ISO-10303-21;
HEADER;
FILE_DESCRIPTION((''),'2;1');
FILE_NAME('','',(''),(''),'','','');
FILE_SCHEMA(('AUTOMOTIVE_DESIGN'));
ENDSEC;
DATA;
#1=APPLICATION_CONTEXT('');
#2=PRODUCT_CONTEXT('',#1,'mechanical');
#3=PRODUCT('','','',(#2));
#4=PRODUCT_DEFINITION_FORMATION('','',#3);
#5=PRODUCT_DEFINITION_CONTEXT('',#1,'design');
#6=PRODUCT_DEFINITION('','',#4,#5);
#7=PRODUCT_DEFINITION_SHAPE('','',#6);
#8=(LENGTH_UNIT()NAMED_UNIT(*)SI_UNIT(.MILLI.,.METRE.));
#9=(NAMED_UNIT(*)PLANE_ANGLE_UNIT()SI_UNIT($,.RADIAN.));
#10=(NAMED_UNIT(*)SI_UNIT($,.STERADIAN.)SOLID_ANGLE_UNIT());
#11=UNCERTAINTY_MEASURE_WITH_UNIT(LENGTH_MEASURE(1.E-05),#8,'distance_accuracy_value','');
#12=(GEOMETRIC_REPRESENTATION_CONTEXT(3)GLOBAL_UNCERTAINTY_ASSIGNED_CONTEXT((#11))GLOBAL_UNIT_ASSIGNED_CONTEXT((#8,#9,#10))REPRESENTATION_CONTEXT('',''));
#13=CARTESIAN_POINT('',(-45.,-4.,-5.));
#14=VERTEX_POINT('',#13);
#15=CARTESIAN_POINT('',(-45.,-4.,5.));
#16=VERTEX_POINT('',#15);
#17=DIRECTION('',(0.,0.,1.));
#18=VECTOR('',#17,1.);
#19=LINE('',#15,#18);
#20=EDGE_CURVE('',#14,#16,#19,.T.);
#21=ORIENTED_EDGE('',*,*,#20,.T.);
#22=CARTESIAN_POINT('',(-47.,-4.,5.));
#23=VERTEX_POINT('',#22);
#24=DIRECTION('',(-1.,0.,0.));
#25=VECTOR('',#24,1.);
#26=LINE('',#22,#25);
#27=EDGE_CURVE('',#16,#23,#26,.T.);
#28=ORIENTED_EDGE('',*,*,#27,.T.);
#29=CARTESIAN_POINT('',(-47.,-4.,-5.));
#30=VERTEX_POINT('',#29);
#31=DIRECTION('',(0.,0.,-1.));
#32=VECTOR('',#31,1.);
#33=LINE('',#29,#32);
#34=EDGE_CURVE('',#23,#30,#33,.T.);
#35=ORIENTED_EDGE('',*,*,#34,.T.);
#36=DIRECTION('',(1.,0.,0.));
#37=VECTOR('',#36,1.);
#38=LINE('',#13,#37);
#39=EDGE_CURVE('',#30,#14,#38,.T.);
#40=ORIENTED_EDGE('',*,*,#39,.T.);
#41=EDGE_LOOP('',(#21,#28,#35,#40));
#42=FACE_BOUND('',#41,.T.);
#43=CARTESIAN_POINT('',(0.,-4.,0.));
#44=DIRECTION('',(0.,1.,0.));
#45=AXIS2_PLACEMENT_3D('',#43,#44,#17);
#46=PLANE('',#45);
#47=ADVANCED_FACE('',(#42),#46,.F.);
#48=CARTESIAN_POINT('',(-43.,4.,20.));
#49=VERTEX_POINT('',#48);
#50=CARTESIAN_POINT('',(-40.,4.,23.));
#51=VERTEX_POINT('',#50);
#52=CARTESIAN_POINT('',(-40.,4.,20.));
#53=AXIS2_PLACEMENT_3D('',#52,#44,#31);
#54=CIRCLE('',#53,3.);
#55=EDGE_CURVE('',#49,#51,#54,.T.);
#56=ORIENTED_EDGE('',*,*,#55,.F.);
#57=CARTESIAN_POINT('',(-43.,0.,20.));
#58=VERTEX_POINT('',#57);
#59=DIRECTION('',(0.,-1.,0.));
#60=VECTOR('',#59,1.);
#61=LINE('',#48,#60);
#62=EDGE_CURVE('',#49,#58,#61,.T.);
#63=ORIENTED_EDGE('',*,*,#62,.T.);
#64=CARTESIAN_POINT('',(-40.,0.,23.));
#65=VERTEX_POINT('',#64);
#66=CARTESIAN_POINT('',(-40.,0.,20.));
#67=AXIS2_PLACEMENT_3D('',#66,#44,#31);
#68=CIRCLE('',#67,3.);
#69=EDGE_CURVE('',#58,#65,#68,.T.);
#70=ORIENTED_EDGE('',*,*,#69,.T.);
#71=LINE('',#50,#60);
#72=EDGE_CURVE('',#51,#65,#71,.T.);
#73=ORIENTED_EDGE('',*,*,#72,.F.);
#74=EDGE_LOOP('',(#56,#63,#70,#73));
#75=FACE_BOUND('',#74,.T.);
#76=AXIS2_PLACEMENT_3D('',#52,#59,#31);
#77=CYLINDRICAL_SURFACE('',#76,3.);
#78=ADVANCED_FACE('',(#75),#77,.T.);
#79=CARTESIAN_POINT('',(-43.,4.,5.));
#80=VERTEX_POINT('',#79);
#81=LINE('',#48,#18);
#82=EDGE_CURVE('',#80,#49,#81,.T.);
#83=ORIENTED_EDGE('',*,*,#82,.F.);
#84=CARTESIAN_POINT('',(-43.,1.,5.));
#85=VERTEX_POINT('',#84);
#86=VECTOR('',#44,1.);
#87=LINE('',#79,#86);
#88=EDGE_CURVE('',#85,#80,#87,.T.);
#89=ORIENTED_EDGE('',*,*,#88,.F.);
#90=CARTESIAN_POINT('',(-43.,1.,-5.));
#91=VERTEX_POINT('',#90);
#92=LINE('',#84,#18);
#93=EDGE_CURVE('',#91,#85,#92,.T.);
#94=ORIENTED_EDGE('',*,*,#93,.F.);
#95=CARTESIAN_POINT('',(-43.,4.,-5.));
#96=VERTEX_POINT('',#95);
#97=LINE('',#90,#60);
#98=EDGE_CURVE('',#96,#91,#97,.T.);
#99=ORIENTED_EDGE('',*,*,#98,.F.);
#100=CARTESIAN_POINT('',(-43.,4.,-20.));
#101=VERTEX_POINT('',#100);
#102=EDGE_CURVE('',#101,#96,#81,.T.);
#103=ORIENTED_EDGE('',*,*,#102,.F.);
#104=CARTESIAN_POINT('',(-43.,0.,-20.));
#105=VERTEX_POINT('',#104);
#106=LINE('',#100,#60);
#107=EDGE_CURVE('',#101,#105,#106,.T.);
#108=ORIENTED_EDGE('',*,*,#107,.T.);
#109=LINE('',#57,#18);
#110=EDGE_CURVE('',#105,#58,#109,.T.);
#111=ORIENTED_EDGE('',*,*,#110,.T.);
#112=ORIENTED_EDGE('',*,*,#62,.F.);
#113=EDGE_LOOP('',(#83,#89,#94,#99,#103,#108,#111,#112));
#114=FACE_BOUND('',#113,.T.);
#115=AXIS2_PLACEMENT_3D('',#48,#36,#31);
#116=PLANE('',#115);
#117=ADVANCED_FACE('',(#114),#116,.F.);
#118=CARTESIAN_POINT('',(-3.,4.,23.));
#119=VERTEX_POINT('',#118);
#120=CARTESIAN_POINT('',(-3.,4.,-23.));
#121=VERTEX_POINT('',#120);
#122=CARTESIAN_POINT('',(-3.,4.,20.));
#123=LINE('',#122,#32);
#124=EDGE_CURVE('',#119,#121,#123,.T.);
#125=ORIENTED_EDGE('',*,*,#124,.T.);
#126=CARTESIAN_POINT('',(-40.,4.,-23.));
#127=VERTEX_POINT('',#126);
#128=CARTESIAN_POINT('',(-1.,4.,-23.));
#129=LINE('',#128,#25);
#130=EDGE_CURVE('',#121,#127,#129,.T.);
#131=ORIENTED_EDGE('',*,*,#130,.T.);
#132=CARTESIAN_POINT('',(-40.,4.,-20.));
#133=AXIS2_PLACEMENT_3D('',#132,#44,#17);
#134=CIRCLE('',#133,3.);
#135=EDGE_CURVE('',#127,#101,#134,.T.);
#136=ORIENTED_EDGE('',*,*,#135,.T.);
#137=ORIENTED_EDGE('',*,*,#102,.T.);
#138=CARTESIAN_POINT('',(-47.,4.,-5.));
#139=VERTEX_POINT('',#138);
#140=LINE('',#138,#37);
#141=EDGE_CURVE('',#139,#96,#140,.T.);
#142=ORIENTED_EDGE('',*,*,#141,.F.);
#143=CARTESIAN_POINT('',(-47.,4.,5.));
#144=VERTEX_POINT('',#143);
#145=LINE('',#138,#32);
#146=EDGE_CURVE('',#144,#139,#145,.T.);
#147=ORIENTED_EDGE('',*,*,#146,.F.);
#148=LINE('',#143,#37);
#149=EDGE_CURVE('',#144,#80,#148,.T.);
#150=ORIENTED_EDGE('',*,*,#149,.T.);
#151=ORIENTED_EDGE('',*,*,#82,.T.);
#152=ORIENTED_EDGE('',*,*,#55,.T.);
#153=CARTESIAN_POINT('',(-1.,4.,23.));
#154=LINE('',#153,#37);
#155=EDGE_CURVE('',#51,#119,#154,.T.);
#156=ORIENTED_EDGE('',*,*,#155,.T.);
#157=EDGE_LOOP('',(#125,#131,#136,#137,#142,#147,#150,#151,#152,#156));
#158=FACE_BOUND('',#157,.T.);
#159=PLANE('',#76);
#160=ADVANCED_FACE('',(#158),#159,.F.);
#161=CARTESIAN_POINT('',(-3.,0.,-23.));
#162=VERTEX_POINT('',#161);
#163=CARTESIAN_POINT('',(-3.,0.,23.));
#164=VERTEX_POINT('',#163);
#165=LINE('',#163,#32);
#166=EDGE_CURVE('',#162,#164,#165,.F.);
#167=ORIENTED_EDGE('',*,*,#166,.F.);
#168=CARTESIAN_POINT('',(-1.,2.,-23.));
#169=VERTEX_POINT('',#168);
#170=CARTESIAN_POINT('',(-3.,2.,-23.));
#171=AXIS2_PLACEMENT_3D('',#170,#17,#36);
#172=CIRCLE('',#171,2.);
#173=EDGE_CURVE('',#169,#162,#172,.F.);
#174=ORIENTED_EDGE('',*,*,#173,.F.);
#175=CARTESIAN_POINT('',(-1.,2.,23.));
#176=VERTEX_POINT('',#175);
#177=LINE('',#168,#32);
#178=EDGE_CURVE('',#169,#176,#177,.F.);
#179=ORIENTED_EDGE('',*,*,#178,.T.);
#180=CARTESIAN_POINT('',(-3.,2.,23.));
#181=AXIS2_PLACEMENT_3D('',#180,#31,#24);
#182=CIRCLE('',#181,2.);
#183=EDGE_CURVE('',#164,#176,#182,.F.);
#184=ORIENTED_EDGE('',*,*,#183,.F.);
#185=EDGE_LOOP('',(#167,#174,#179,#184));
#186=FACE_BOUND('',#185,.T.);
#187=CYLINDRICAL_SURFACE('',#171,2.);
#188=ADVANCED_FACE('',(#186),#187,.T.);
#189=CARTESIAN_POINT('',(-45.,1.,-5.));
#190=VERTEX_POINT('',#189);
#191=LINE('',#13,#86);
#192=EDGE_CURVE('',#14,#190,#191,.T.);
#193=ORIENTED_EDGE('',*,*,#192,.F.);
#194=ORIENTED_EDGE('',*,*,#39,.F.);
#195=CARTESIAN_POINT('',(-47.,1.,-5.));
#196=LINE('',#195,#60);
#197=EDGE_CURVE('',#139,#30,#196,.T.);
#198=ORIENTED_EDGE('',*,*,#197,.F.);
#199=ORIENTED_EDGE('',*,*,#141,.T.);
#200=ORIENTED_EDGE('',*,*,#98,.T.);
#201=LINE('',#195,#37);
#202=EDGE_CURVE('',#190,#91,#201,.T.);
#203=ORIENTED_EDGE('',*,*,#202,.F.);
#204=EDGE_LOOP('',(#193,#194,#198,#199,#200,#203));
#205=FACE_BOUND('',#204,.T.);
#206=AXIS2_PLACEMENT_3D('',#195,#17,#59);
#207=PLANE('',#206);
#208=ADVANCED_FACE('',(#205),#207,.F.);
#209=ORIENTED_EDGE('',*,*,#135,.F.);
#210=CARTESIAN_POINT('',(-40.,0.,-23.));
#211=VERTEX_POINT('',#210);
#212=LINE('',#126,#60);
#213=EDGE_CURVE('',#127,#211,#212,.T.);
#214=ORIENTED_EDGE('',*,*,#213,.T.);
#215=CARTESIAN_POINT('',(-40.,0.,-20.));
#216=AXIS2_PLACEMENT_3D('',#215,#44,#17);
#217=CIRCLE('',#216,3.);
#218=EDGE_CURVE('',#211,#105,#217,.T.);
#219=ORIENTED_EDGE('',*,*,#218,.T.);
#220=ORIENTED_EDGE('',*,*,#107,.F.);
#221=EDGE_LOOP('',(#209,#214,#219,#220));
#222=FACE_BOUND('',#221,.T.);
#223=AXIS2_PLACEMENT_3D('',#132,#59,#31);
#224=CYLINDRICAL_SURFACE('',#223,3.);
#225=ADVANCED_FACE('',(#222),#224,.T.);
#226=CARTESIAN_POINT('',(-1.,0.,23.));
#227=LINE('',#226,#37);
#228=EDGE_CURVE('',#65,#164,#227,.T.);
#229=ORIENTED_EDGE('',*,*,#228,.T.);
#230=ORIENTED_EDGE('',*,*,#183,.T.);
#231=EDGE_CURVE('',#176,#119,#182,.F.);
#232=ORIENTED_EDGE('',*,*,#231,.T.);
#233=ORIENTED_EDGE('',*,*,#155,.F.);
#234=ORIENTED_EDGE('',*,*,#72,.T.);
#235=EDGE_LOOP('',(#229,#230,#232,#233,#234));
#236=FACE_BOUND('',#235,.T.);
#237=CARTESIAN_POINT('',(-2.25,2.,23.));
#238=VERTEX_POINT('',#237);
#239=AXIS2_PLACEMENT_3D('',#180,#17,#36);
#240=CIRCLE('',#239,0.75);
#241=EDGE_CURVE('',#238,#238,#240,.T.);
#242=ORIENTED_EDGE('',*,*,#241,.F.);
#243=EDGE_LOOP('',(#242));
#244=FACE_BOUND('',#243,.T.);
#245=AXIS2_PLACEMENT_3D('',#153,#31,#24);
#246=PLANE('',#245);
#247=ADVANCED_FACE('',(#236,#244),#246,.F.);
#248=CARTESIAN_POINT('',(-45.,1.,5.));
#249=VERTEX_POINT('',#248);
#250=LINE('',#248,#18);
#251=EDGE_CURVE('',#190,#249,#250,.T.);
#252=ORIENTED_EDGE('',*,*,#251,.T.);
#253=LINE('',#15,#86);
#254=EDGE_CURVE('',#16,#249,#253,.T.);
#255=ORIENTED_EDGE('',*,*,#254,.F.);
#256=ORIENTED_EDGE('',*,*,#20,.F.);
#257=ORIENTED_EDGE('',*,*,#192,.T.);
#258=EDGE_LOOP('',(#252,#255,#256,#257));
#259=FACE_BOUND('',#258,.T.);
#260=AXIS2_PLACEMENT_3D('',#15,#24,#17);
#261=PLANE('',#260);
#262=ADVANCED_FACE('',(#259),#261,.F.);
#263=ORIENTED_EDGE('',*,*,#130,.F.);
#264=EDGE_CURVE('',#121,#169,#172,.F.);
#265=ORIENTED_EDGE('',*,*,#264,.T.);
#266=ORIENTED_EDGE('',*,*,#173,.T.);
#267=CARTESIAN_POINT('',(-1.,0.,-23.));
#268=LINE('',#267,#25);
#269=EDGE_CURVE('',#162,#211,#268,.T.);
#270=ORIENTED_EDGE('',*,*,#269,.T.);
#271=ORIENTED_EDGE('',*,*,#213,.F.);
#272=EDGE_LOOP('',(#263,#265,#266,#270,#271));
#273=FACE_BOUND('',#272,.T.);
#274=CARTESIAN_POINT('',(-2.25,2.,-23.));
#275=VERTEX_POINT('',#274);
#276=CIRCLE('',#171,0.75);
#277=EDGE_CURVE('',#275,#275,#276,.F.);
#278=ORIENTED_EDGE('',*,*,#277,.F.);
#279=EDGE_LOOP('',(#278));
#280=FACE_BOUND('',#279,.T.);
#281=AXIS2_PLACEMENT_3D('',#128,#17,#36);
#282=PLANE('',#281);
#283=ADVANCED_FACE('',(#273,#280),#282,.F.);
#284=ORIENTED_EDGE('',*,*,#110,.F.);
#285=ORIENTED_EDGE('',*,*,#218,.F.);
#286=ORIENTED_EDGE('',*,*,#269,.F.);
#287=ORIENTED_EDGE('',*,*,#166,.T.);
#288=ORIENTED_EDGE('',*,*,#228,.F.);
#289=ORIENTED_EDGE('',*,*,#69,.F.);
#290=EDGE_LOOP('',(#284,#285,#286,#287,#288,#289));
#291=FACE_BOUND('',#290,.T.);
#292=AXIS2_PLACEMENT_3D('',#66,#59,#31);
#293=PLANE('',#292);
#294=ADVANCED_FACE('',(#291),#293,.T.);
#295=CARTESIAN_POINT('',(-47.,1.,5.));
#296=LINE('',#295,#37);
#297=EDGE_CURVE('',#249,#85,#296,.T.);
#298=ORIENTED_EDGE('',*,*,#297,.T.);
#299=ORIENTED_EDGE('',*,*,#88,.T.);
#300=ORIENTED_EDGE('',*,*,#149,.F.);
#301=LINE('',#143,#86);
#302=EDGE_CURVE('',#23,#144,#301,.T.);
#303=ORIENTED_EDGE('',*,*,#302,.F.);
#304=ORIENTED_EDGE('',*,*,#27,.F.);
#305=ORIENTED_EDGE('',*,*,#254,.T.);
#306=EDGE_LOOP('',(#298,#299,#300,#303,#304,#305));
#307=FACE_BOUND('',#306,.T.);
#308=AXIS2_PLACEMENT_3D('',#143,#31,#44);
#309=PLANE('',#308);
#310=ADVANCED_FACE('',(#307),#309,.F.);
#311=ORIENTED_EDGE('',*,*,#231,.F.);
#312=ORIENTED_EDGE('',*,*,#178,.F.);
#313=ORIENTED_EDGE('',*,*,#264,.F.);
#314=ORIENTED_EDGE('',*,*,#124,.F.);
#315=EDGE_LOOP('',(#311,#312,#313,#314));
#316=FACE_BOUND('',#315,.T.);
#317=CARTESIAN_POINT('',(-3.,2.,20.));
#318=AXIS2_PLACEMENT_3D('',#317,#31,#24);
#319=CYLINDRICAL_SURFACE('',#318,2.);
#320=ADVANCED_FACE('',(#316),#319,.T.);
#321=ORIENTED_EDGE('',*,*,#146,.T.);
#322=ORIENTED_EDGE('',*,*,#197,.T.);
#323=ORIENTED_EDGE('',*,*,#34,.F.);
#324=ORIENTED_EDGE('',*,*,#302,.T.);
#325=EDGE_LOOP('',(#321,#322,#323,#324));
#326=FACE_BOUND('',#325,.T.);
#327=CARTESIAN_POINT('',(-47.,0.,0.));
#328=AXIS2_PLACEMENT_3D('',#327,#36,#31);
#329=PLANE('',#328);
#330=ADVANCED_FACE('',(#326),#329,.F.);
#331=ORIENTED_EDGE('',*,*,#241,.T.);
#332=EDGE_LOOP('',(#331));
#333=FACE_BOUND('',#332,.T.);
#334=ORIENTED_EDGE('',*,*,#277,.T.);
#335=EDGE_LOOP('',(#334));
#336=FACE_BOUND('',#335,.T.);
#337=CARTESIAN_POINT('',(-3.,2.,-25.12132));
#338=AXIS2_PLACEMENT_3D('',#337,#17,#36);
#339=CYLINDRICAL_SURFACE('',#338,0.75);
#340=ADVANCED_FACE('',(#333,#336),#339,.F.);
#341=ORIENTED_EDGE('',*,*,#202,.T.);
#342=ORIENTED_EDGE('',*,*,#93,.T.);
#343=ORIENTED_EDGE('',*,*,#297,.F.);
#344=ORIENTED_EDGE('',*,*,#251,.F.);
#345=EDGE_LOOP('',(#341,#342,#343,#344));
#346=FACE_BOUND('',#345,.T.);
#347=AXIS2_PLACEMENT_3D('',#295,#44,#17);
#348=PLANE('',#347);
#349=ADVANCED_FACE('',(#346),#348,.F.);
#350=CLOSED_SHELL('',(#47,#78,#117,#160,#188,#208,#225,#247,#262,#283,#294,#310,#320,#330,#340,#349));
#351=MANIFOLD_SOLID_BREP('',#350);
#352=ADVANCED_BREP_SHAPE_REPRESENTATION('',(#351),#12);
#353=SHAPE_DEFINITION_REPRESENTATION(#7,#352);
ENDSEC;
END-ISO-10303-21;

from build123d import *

# Parameters (mm, degrees)
BOSS_EXTRUDE1_DEPTH = 4
FILLET1_R           = 2
SKETCH2_R           = 0.75
CUT_EXTRUDE1_DEPTH  = 46
SKETCH4_W           = 10
SKETCH4_H           = 3
BOSS_EXTRUDE2_DEPTH = 4
SKETCH6_W           = 2
SKETCH6_H           = 10
BOSS_EXTRUDE3_DEPTH = 5


with BuildPart() as part:
    # Sketch1 → Boss-Extrude1 (new body)
    with BuildSketch(Plane(origin=(0, 0, 0), x_dir=(1, 0, 0), z_dir=(0, 1, 0))):
        with BuildLine():
            Line((-1, 23), (-1, -23))
            Line((-1, -23), (-40, -23))
            ThreePointArc((-40, -23), (-42.121320344, -22.121320344), (-43, -20))
            Line((-43, -20), (-43, 20))
            ThreePointArc((-43, 20), (-42.121320344, 22.121320344), (-40, 23))
            Line((-40, 23), (-1, 23))
        make_face()
    extrude(amount=BOSS_EXTRUDE1_DEPTH)

    # Fillet1
    fillet1_edges = [part.edges().sort_by_distance(p)[0] for p in [
        (-1, 0, 0),
        (-1, 4, 0),
    ]]
    fillet(fillet1_edges, radius=FILLET1_R - 0.0001)  # a hair under: the kernel refuses the full size

    # Sketch2 → Cut-Extrude1 (cut)
    with BuildSketch(Plane.XY.offset(23)):
        with Locations((-3, 2)):
            Circle(SKETCH2_R)
    extrude(amount=-CUT_EXTRUDE1_DEPTH, mode=Mode.SUBTRACT)

    # Sketch4 → Boss-Extrude2 (add)
    with BuildSketch(Plane.ZY.offset(43)):
        with Locations((0, 2.5)):
            Rectangle(SKETCH4_W, SKETCH4_H)
    extrude(amount=BOSS_EXTRUDE2_DEPTH)

    # Sketch6 → Boss-Extrude3 (add)
    with BuildSketch(Plane.XZ.offset(-1)):
        with Locations((-46, 0)):
            Rectangle(SKETCH6_W, SKETCH6_H)
    extrude(amount=BOSS_EXTRUDE3_DEPTH)


solid = part.part
